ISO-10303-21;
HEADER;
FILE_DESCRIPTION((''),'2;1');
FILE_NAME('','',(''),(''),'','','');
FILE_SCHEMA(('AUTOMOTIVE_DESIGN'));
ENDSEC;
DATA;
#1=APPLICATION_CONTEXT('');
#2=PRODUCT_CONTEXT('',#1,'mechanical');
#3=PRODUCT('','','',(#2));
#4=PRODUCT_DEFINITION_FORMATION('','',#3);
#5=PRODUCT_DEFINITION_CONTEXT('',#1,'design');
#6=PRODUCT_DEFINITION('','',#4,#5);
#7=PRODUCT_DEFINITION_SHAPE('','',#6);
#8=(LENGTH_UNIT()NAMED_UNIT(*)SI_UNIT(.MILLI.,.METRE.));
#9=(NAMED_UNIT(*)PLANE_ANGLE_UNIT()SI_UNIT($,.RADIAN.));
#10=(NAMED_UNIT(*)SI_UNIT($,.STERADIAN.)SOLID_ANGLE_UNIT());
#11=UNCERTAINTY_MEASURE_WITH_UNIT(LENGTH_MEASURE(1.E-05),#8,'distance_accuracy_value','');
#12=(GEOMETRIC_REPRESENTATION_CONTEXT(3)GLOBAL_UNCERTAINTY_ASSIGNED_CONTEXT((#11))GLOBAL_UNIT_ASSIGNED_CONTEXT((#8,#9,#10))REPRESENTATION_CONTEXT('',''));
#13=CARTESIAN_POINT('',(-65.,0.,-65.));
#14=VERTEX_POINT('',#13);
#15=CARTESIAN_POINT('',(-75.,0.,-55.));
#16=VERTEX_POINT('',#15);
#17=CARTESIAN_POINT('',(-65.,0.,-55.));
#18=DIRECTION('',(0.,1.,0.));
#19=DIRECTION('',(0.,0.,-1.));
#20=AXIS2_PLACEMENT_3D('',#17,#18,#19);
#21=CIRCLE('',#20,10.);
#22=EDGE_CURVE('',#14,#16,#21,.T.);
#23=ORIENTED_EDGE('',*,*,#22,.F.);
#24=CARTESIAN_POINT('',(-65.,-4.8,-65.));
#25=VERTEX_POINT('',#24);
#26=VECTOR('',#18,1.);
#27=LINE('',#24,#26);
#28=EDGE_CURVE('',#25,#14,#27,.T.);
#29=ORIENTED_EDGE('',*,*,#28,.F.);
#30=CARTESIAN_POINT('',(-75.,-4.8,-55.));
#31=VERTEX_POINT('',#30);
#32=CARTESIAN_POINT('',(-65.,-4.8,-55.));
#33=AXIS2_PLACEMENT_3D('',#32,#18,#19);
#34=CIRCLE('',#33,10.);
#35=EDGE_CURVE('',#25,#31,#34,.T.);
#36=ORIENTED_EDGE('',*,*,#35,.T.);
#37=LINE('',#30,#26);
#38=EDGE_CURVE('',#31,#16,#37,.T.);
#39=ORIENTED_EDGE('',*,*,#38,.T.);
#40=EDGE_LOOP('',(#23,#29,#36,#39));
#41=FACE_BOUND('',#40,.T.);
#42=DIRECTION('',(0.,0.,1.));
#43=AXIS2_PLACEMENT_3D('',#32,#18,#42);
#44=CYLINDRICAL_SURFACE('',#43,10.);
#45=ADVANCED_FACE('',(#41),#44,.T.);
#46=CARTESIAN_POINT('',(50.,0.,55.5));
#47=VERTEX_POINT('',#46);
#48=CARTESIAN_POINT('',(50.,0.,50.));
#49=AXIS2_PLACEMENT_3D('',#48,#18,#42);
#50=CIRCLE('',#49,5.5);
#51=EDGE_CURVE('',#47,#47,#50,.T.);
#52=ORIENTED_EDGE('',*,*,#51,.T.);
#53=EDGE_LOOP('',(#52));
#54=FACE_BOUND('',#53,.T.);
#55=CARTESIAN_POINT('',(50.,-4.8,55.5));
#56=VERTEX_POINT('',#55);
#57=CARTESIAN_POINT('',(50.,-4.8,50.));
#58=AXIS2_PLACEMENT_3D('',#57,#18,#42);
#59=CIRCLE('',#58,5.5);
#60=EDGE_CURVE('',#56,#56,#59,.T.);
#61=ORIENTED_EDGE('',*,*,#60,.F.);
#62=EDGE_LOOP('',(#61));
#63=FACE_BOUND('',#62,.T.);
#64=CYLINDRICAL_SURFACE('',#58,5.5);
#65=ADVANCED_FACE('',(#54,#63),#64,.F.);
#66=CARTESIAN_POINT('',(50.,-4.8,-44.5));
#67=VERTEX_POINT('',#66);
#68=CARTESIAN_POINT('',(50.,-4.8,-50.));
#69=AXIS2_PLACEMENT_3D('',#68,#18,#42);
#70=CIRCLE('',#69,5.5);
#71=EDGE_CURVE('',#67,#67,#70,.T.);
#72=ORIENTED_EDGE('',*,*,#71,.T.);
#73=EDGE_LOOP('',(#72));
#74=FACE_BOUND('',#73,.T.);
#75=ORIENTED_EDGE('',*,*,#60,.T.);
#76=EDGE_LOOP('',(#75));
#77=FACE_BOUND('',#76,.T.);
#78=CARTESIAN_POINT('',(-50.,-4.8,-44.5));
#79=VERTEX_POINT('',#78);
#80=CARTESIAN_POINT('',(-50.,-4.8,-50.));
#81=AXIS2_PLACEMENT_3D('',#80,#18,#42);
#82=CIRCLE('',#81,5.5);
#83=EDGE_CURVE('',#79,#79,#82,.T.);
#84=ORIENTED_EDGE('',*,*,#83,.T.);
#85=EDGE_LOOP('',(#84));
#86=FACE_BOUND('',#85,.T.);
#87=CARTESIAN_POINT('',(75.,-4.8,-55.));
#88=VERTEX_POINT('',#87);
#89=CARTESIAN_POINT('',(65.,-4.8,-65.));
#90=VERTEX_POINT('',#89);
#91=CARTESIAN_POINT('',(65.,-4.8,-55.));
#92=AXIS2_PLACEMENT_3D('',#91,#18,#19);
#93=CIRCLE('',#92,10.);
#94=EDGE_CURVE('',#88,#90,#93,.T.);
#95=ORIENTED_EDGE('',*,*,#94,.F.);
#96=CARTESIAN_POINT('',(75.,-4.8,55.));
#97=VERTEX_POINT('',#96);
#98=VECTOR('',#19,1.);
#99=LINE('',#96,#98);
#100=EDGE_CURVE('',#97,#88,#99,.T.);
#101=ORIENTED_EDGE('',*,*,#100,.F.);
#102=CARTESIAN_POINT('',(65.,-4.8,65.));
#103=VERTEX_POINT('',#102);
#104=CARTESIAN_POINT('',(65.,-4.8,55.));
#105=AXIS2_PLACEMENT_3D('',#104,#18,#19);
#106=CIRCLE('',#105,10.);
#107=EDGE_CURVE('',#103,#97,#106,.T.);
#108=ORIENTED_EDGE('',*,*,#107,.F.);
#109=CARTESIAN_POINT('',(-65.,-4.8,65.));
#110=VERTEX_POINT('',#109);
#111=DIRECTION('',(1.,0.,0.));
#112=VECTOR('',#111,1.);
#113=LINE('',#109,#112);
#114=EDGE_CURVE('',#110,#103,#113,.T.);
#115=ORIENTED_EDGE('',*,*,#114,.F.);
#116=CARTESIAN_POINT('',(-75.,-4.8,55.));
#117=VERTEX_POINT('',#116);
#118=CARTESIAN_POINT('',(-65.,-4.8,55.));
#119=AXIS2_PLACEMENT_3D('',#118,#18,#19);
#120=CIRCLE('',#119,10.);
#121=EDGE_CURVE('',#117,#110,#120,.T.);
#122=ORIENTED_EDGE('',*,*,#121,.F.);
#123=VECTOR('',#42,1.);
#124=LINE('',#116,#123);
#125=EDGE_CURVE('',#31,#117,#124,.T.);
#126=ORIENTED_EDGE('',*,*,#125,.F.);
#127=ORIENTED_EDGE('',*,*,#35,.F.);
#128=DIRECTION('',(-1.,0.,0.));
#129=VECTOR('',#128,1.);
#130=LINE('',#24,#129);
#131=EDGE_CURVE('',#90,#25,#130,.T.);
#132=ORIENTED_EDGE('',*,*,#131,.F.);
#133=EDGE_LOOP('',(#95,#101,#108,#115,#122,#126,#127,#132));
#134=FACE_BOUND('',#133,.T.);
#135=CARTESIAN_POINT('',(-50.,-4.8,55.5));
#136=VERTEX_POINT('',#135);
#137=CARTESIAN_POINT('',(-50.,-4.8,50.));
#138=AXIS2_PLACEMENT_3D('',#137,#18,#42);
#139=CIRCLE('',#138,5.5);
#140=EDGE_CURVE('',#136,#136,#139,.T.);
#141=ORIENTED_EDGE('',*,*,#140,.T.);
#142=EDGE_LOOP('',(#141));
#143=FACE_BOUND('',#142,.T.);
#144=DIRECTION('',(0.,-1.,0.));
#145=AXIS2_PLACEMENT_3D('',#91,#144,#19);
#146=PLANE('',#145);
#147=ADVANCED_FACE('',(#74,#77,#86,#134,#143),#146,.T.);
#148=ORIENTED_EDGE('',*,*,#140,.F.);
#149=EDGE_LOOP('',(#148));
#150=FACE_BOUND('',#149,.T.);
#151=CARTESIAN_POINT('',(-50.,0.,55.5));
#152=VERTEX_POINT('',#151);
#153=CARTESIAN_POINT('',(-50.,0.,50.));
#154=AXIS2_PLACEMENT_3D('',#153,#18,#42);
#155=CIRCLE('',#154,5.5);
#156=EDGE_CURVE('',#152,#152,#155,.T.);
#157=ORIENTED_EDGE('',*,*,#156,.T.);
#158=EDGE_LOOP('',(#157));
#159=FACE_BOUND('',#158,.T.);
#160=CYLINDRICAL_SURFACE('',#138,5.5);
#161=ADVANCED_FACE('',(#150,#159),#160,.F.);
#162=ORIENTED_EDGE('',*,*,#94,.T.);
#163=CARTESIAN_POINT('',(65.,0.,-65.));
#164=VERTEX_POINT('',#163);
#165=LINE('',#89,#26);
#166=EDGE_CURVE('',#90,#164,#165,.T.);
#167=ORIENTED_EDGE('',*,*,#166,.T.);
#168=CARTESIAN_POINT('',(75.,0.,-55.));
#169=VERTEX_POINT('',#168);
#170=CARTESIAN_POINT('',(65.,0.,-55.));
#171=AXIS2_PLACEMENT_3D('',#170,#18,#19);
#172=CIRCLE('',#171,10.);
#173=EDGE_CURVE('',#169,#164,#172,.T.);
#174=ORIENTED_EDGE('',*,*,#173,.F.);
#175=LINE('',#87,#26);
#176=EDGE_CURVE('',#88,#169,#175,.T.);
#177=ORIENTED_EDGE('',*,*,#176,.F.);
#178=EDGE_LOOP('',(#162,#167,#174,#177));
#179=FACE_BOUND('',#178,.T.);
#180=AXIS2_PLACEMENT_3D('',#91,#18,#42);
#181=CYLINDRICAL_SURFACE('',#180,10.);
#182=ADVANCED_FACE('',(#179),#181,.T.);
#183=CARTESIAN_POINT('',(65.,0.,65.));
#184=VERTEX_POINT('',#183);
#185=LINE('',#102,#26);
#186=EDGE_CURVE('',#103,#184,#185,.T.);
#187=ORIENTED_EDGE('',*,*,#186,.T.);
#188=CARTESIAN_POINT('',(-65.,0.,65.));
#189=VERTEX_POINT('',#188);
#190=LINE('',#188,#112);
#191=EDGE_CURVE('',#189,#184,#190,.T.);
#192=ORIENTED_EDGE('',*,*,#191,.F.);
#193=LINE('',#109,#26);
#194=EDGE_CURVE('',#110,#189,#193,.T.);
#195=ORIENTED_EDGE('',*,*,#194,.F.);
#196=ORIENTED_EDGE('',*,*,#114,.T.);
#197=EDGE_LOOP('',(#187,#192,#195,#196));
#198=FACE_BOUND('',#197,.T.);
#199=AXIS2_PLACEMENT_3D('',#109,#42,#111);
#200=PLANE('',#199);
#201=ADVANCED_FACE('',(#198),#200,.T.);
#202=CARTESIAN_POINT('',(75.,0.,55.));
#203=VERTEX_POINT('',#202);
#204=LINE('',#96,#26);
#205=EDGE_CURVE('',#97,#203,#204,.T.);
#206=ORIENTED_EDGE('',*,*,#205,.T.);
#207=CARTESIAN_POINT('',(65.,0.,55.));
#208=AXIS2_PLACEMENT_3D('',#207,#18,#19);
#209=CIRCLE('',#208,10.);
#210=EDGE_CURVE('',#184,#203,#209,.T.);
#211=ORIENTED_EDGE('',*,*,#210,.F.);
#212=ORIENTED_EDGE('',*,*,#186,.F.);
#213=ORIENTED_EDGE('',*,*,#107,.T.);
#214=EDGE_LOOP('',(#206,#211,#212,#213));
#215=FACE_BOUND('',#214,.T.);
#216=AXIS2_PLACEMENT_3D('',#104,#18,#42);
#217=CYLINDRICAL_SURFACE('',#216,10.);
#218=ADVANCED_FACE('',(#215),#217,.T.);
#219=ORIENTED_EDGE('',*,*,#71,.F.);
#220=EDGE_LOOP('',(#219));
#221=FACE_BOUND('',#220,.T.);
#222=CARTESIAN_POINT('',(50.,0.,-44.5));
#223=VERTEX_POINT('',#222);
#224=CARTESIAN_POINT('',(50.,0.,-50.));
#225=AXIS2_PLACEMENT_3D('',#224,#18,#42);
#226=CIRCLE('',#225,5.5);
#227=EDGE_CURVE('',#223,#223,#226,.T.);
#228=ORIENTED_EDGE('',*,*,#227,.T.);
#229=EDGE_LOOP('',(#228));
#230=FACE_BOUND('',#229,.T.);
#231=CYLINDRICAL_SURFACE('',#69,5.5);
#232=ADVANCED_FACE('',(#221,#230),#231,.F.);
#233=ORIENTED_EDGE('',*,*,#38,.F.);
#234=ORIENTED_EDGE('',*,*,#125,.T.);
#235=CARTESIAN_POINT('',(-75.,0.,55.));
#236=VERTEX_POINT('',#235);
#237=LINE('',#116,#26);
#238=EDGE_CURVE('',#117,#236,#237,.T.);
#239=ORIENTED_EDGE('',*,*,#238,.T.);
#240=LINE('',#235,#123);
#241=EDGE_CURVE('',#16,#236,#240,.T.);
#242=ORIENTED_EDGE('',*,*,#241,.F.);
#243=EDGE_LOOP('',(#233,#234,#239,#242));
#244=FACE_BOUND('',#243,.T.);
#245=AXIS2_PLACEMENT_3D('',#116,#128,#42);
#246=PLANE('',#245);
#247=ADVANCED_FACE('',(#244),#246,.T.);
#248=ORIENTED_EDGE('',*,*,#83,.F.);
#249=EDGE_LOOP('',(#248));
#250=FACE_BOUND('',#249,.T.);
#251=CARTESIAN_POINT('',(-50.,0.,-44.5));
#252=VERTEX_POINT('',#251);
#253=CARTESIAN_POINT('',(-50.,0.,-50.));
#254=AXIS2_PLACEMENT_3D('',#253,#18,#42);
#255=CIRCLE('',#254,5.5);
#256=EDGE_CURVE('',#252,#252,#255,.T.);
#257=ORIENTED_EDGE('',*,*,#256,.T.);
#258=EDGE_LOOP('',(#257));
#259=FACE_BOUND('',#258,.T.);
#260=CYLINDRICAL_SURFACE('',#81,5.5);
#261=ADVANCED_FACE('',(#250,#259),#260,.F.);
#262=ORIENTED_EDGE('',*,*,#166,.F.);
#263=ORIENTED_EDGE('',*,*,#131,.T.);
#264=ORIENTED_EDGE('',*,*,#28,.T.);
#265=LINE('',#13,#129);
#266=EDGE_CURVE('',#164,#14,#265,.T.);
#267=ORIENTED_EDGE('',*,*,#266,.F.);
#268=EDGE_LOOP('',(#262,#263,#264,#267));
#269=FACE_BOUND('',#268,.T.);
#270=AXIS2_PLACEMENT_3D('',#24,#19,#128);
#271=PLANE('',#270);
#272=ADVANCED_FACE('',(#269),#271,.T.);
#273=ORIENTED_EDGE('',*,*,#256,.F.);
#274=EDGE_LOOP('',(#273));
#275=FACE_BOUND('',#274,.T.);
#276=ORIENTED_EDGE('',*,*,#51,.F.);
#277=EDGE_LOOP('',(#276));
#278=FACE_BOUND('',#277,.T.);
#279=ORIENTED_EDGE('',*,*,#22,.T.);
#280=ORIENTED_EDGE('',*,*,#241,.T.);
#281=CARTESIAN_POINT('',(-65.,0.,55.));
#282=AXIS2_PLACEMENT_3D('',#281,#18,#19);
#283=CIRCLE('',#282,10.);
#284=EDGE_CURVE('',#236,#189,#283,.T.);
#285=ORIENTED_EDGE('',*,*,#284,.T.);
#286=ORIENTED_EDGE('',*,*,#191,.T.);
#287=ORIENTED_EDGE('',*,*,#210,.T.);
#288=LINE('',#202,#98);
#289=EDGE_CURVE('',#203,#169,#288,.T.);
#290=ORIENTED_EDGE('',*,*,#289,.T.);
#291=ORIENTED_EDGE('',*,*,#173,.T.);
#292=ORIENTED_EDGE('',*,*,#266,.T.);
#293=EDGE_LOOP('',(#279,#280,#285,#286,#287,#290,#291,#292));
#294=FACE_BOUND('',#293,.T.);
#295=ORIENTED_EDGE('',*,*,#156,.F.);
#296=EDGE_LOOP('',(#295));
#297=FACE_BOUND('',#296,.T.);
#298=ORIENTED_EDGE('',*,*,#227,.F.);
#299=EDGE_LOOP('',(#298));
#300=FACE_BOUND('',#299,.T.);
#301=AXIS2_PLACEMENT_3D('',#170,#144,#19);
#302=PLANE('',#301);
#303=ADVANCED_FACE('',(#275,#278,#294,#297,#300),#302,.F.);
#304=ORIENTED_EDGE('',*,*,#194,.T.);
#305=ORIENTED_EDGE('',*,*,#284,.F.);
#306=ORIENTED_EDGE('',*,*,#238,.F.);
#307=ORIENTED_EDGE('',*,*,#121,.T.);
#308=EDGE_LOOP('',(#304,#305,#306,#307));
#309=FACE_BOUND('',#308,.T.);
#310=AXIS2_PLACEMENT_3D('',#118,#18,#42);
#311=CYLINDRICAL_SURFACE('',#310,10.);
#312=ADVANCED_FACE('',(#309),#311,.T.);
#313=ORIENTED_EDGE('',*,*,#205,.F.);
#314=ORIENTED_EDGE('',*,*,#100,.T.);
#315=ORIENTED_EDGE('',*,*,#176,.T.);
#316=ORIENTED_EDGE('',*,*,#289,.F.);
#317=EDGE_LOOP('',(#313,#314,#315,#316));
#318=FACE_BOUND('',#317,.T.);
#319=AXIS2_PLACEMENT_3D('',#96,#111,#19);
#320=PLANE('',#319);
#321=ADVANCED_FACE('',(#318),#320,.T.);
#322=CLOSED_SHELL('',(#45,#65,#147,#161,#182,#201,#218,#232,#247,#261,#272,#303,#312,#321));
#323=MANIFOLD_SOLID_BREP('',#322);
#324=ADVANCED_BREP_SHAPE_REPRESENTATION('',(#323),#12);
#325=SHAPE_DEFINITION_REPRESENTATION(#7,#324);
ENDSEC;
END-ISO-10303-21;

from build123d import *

# Parameters (mm, degrees)
ESBO_O1_R          = 5.5
FLANGE_BASE1_DEPTH = 4.8


# Sheet-metal steps are written as plain solids
with BuildPart() as part:
    # Esboço1 → Flange-base1 (new body)
    with BuildSketch(Plane(origin=(0, 0, 0), x_dir=(1, 0, 0), z_dir=(0, 1, 0))):
        with BuildLine():
            Line((-65, -65), (65, -65))
            ThreePointArc((65, -65), (72.071067812, -62.071067812), (75, -55))
            Line((75, -55), (75, 55))
            ThreePointArc((75, 55), (72.071067812, 62.071067812), (65, 65))
            Line((65, 65), (-65, 65))
            ThreePointArc((-65, 65), (-72.071067812, 62.071067812), (-75, 55))
            Line((-75, 55), (-75, -55))
            ThreePointArc((-75, -55), (-72.071067812, -62.071067812), (-65, -65))
        make_face()
        with Locations(Location((-50, 50, 0), (0, 0, 270))):
            Circle(ESBO_O1_R, mode=Mode.SUBTRACT)
        with Locations(Location((50, 50, 0), (0, 0, 270))):
            Circle(ESBO_O1_R, mode=Mode.SUBTRACT)
        with Locations(Location((50, -50, 0), (0, 0, 270))):
            Circle(ESBO_O1_R, mode=Mode.SUBTRACT)
        with Locations(Location((-50, -50, 0), (0, 0, 270))):
            Circle(ESBO_O1_R, mode=Mode.SUBTRACT)
    extrude(amount=-FLANGE_BASE1_DEPTH)


solid = part.part
